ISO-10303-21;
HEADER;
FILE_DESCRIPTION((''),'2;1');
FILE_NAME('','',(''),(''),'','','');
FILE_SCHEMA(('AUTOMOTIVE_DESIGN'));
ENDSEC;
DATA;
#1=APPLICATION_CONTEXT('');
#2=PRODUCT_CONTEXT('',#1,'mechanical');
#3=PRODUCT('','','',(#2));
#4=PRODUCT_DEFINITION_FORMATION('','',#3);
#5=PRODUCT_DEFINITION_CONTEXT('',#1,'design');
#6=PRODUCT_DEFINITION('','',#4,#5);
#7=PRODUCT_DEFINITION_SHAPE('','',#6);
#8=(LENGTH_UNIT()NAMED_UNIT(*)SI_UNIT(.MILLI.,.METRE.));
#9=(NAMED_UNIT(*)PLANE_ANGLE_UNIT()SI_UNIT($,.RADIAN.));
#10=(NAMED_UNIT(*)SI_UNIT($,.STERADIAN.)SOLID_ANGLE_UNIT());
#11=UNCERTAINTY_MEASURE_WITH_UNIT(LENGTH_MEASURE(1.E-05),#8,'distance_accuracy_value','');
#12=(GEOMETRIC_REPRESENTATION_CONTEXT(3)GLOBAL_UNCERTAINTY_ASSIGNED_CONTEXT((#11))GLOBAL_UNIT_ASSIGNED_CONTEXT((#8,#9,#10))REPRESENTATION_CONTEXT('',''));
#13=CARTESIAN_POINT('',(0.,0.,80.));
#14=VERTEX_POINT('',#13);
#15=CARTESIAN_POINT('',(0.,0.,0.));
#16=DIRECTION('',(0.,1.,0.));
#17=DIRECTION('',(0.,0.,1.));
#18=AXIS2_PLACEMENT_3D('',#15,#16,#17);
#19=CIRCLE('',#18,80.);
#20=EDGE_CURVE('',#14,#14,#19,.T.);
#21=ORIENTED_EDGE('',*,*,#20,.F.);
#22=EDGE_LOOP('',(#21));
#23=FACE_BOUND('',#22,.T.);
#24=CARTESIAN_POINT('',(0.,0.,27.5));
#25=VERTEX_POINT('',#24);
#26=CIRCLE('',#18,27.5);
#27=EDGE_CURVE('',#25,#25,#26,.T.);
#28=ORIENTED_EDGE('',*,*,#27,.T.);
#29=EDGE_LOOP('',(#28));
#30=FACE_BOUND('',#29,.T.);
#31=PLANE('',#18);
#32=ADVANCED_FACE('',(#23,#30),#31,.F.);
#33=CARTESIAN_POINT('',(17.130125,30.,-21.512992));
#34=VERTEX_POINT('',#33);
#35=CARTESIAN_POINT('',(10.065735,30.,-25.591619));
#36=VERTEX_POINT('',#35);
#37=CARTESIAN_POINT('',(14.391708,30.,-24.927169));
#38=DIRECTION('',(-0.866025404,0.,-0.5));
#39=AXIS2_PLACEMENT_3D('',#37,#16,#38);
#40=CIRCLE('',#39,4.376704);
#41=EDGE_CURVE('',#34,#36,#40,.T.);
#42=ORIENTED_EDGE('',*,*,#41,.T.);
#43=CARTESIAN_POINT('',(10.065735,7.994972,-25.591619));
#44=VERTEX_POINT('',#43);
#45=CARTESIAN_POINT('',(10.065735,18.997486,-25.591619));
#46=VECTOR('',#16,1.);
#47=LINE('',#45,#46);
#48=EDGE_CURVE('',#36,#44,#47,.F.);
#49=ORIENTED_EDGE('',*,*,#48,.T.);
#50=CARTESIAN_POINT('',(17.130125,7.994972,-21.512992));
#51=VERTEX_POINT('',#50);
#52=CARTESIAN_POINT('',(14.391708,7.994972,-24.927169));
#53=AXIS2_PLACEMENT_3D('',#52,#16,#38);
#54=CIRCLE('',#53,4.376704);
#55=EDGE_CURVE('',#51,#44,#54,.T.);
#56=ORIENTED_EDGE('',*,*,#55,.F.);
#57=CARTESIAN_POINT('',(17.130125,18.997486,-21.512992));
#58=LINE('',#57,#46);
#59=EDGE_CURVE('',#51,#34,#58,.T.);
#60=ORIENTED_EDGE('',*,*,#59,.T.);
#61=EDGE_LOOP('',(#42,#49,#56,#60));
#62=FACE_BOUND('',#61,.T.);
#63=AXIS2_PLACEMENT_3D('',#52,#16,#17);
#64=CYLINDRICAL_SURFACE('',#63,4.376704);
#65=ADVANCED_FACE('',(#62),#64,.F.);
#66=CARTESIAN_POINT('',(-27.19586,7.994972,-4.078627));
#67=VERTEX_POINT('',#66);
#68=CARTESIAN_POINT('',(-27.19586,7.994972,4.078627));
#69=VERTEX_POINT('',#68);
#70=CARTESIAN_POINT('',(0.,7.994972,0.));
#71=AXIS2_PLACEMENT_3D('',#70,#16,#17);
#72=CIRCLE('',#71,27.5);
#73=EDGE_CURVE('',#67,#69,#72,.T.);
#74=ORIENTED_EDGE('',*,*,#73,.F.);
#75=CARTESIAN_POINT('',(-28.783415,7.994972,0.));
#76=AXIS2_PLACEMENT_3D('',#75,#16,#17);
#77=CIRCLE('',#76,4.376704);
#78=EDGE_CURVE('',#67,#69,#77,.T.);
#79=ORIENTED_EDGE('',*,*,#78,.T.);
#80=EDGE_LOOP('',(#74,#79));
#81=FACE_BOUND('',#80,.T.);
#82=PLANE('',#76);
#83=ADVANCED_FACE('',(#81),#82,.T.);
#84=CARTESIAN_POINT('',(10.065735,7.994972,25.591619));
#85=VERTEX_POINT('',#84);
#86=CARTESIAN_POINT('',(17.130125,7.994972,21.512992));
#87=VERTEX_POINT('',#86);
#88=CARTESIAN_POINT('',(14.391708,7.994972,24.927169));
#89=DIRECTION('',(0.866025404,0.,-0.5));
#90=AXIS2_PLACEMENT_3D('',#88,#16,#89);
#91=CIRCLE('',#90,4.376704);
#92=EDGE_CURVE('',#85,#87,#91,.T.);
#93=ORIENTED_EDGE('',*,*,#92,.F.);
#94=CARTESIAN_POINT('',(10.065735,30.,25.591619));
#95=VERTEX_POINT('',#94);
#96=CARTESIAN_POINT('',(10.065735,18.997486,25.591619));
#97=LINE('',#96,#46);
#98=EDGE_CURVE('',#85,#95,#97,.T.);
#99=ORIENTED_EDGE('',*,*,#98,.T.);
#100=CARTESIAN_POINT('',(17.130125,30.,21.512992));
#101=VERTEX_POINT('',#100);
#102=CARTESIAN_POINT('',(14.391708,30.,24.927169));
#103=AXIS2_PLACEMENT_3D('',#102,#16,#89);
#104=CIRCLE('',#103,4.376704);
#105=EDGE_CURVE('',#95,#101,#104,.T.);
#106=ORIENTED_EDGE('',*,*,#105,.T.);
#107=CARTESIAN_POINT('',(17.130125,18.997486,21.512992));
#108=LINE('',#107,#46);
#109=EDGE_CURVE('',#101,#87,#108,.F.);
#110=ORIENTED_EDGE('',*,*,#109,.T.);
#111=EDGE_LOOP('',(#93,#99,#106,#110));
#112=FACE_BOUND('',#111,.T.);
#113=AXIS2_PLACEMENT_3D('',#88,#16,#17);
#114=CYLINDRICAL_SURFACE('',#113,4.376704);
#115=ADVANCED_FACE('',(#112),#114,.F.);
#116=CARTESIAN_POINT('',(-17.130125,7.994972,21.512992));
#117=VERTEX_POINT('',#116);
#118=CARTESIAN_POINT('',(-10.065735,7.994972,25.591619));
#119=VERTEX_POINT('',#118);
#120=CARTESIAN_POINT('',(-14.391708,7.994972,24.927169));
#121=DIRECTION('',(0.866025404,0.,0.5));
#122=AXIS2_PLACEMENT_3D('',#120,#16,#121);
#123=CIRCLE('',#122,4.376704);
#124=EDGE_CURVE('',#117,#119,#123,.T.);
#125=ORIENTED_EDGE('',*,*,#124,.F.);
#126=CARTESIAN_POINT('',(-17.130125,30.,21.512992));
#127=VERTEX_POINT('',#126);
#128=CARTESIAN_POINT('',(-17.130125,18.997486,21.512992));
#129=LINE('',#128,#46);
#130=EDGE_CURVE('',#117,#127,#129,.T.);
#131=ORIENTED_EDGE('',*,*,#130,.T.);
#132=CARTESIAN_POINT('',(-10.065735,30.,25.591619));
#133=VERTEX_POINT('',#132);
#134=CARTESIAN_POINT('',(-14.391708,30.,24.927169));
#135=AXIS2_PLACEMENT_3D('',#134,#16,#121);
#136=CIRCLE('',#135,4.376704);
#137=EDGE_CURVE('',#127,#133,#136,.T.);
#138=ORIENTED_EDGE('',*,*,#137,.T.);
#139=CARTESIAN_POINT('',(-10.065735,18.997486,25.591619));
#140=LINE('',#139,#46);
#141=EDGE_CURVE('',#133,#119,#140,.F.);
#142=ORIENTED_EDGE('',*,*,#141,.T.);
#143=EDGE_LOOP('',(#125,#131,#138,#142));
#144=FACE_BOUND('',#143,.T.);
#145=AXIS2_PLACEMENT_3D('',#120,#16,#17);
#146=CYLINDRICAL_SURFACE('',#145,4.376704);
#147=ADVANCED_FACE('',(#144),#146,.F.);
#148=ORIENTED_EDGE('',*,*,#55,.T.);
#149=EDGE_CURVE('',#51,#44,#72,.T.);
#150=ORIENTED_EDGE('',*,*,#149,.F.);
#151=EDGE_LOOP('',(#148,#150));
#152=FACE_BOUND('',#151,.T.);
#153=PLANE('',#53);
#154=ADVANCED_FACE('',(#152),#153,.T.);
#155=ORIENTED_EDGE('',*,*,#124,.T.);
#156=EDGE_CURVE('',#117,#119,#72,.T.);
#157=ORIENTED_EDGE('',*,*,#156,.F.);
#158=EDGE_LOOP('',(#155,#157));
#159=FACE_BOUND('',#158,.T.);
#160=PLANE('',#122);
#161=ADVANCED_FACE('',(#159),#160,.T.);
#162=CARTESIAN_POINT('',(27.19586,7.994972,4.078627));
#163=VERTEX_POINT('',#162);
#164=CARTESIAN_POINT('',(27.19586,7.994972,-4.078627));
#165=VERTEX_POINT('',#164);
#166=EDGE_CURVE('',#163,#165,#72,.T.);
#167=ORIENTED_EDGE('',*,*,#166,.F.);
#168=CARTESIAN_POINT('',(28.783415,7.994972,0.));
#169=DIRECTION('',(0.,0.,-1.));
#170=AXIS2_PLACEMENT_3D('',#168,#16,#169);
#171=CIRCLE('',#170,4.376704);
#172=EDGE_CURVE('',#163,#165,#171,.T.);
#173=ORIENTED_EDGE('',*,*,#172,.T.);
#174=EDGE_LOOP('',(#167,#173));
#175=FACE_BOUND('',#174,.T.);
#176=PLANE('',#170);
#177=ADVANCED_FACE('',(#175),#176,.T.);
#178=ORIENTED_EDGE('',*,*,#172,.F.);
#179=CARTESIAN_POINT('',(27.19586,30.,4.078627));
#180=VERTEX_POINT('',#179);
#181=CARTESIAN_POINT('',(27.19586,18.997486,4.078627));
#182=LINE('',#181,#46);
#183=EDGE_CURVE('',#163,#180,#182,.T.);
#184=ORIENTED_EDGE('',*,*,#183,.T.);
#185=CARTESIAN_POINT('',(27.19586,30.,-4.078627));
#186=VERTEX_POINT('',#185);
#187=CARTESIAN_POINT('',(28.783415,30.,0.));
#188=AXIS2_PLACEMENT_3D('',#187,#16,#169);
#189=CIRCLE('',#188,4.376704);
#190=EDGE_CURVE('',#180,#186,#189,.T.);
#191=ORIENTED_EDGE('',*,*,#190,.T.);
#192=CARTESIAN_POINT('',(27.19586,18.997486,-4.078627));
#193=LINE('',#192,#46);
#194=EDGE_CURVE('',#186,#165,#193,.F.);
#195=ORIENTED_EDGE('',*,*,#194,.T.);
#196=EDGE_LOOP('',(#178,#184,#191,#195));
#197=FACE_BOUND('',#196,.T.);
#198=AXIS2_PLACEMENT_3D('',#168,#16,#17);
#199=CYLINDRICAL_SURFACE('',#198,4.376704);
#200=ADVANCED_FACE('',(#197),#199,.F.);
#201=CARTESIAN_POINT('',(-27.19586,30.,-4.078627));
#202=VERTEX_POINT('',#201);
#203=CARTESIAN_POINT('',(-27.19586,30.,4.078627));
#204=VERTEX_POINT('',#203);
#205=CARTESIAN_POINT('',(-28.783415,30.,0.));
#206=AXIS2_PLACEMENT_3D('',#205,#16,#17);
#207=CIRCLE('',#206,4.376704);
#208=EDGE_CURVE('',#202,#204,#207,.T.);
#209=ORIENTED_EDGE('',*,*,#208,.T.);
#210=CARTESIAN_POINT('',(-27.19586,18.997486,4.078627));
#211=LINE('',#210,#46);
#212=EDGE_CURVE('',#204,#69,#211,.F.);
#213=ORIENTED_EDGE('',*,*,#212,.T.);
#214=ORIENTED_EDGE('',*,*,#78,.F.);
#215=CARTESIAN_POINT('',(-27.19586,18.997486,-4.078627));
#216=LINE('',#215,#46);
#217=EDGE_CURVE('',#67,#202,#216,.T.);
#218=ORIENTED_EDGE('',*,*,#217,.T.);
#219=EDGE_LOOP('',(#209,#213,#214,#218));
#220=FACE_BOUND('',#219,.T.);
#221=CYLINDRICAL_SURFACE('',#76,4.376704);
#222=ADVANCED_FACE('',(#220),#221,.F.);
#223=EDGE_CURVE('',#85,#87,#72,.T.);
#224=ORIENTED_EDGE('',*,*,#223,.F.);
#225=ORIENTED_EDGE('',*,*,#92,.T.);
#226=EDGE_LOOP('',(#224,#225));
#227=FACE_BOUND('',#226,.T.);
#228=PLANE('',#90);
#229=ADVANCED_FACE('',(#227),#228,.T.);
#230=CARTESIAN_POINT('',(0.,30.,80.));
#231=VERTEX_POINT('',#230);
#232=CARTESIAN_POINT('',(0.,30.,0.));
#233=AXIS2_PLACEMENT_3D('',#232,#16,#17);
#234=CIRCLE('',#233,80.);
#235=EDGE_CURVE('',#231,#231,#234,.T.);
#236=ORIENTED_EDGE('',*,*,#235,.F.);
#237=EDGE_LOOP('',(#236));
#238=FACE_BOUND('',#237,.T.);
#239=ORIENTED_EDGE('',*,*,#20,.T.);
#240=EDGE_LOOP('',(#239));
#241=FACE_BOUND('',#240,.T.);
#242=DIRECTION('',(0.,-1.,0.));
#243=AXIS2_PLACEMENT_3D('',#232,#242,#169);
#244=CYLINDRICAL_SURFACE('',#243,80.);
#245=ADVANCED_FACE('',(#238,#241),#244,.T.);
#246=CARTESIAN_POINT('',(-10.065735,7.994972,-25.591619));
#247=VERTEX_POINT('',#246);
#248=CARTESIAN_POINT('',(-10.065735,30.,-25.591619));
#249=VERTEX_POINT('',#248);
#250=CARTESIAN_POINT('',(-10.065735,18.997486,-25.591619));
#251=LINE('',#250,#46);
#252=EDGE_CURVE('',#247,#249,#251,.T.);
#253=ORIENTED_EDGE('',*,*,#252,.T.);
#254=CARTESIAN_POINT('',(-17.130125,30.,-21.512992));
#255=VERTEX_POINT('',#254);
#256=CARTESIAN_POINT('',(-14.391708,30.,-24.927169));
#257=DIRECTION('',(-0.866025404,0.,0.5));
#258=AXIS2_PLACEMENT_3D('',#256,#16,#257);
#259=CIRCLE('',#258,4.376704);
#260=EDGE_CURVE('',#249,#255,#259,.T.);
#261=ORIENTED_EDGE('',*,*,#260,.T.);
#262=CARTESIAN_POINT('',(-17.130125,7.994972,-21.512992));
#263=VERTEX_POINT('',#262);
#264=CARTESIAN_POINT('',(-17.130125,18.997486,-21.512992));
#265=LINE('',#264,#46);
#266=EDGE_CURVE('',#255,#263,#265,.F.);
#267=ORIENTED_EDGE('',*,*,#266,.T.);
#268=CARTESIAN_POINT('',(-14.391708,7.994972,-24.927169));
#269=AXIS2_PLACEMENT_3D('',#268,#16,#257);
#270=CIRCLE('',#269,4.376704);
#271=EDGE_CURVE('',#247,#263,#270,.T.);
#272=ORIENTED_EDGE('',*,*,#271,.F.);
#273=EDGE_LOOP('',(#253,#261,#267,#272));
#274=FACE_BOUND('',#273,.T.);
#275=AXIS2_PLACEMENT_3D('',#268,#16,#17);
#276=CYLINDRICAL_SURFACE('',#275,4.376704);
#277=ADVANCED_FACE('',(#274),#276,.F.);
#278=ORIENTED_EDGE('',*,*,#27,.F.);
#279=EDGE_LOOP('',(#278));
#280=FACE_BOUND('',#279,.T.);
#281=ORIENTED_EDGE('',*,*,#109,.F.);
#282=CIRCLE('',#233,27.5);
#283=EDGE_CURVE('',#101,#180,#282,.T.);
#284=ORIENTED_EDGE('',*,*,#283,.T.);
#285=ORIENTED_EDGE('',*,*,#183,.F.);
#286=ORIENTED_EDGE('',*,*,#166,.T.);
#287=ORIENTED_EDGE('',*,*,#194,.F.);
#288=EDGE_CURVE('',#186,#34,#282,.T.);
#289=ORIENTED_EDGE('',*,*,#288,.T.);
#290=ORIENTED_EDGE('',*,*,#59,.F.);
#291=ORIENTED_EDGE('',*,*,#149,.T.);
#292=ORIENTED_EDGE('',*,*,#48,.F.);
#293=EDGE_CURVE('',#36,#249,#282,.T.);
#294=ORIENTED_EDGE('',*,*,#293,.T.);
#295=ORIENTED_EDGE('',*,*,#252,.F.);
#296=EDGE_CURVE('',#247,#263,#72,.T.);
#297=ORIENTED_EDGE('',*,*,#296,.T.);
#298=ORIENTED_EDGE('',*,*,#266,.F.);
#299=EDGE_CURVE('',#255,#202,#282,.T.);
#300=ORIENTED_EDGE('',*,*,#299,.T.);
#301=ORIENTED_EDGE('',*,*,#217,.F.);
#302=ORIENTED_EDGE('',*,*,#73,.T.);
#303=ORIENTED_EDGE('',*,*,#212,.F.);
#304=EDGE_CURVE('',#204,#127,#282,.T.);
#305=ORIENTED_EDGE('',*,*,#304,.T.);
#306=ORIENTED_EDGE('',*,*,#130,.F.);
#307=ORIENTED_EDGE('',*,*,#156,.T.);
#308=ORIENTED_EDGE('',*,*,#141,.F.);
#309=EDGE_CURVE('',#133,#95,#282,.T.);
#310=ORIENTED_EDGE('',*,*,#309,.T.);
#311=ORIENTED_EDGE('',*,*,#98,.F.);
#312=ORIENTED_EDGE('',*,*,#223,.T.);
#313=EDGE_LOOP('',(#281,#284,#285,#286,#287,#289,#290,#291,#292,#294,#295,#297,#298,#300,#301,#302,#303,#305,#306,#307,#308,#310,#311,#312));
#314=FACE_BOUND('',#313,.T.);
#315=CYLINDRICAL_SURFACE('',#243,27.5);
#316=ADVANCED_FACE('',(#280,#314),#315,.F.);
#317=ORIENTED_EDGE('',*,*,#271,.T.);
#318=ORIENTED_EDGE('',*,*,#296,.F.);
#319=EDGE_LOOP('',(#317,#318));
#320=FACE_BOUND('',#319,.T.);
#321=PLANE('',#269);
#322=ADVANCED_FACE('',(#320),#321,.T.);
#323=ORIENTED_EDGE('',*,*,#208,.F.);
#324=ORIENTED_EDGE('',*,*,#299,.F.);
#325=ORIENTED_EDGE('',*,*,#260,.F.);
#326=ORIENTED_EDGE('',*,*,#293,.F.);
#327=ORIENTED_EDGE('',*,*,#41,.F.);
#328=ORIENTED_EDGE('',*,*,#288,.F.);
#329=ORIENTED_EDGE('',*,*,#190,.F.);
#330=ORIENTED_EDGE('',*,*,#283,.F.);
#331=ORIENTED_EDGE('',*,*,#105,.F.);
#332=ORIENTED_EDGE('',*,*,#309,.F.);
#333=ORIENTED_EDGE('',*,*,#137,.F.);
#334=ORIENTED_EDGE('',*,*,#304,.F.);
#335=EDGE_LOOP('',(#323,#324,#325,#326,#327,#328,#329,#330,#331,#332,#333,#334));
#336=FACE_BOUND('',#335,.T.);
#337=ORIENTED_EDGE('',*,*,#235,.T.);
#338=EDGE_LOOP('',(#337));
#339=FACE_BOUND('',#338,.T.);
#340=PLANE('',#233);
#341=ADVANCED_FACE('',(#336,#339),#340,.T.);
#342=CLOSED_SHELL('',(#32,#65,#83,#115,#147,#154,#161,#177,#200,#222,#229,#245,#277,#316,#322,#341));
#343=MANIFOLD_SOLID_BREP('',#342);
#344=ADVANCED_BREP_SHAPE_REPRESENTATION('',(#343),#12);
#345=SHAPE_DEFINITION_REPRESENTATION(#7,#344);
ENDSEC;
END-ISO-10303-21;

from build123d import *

# Parameters (mm, degrees)
SKETCH1_R           = 80
BOSS_EXTRUDE1_DEPTH = 30
SKETCH2_R           = 27.5
CUT_EXTRUDE1_DEPTH  = 118.046999107
SKETCH3_R           = 4.376703516
CUT_EXTRUDE2_DEPTH  = 22.005028175
CIRPATTERN1_COUNT   = 6


with BuildPart() as part:
    # Sketch1 → Boss-Extrude1 (new body)
    with BuildSketch(Plane(origin=(0, 0, 0), x_dir=(1, 0, 0), z_dir=(0, 1, 0))):
        Circle(SKETCH1_R)
    extrude(amount=BOSS_EXTRUDE1_DEPTH)

    # Sketch2 → Cut-Extrude1 (cut, through all)
    with BuildSketch(Plane(origin=(0, 0, 0), x_dir=(1, 0, 0), z_dir=(0, 1, 0))):
        Circle(SKETCH2_R)
    extrude(amount=CUT_EXTRUDE1_DEPTH, mode=Mode.SUBTRACT)

    # Sketch3 → Cut-Extrude2 (cut)
    with BuildSketch(Plane(origin=(0, 30, 0), x_dir=(1, 0, 0), z_dir=(0, 1, 0))):
        with Locations((-28.783415245, 0)):
            Circle(SKETCH3_R)
    cut_extrude2 = extrude(amount=-CUT_EXTRUDE2_DEPTH, mode=Mode.SUBTRACT)

    # CirPattern1: Cut-Extrude2 ×6 about axis
    cirpattern1_axis = Axis((0, 0, 0), (0, 1, 0))
    for i in range(1, CIRPATTERN1_COUNT):
        add(cut_extrude2.rotate(cirpattern1_axis, i * 360 / CIRPATTERN1_COUNT), mode=Mode.SUBTRACT)


solid = part.part
